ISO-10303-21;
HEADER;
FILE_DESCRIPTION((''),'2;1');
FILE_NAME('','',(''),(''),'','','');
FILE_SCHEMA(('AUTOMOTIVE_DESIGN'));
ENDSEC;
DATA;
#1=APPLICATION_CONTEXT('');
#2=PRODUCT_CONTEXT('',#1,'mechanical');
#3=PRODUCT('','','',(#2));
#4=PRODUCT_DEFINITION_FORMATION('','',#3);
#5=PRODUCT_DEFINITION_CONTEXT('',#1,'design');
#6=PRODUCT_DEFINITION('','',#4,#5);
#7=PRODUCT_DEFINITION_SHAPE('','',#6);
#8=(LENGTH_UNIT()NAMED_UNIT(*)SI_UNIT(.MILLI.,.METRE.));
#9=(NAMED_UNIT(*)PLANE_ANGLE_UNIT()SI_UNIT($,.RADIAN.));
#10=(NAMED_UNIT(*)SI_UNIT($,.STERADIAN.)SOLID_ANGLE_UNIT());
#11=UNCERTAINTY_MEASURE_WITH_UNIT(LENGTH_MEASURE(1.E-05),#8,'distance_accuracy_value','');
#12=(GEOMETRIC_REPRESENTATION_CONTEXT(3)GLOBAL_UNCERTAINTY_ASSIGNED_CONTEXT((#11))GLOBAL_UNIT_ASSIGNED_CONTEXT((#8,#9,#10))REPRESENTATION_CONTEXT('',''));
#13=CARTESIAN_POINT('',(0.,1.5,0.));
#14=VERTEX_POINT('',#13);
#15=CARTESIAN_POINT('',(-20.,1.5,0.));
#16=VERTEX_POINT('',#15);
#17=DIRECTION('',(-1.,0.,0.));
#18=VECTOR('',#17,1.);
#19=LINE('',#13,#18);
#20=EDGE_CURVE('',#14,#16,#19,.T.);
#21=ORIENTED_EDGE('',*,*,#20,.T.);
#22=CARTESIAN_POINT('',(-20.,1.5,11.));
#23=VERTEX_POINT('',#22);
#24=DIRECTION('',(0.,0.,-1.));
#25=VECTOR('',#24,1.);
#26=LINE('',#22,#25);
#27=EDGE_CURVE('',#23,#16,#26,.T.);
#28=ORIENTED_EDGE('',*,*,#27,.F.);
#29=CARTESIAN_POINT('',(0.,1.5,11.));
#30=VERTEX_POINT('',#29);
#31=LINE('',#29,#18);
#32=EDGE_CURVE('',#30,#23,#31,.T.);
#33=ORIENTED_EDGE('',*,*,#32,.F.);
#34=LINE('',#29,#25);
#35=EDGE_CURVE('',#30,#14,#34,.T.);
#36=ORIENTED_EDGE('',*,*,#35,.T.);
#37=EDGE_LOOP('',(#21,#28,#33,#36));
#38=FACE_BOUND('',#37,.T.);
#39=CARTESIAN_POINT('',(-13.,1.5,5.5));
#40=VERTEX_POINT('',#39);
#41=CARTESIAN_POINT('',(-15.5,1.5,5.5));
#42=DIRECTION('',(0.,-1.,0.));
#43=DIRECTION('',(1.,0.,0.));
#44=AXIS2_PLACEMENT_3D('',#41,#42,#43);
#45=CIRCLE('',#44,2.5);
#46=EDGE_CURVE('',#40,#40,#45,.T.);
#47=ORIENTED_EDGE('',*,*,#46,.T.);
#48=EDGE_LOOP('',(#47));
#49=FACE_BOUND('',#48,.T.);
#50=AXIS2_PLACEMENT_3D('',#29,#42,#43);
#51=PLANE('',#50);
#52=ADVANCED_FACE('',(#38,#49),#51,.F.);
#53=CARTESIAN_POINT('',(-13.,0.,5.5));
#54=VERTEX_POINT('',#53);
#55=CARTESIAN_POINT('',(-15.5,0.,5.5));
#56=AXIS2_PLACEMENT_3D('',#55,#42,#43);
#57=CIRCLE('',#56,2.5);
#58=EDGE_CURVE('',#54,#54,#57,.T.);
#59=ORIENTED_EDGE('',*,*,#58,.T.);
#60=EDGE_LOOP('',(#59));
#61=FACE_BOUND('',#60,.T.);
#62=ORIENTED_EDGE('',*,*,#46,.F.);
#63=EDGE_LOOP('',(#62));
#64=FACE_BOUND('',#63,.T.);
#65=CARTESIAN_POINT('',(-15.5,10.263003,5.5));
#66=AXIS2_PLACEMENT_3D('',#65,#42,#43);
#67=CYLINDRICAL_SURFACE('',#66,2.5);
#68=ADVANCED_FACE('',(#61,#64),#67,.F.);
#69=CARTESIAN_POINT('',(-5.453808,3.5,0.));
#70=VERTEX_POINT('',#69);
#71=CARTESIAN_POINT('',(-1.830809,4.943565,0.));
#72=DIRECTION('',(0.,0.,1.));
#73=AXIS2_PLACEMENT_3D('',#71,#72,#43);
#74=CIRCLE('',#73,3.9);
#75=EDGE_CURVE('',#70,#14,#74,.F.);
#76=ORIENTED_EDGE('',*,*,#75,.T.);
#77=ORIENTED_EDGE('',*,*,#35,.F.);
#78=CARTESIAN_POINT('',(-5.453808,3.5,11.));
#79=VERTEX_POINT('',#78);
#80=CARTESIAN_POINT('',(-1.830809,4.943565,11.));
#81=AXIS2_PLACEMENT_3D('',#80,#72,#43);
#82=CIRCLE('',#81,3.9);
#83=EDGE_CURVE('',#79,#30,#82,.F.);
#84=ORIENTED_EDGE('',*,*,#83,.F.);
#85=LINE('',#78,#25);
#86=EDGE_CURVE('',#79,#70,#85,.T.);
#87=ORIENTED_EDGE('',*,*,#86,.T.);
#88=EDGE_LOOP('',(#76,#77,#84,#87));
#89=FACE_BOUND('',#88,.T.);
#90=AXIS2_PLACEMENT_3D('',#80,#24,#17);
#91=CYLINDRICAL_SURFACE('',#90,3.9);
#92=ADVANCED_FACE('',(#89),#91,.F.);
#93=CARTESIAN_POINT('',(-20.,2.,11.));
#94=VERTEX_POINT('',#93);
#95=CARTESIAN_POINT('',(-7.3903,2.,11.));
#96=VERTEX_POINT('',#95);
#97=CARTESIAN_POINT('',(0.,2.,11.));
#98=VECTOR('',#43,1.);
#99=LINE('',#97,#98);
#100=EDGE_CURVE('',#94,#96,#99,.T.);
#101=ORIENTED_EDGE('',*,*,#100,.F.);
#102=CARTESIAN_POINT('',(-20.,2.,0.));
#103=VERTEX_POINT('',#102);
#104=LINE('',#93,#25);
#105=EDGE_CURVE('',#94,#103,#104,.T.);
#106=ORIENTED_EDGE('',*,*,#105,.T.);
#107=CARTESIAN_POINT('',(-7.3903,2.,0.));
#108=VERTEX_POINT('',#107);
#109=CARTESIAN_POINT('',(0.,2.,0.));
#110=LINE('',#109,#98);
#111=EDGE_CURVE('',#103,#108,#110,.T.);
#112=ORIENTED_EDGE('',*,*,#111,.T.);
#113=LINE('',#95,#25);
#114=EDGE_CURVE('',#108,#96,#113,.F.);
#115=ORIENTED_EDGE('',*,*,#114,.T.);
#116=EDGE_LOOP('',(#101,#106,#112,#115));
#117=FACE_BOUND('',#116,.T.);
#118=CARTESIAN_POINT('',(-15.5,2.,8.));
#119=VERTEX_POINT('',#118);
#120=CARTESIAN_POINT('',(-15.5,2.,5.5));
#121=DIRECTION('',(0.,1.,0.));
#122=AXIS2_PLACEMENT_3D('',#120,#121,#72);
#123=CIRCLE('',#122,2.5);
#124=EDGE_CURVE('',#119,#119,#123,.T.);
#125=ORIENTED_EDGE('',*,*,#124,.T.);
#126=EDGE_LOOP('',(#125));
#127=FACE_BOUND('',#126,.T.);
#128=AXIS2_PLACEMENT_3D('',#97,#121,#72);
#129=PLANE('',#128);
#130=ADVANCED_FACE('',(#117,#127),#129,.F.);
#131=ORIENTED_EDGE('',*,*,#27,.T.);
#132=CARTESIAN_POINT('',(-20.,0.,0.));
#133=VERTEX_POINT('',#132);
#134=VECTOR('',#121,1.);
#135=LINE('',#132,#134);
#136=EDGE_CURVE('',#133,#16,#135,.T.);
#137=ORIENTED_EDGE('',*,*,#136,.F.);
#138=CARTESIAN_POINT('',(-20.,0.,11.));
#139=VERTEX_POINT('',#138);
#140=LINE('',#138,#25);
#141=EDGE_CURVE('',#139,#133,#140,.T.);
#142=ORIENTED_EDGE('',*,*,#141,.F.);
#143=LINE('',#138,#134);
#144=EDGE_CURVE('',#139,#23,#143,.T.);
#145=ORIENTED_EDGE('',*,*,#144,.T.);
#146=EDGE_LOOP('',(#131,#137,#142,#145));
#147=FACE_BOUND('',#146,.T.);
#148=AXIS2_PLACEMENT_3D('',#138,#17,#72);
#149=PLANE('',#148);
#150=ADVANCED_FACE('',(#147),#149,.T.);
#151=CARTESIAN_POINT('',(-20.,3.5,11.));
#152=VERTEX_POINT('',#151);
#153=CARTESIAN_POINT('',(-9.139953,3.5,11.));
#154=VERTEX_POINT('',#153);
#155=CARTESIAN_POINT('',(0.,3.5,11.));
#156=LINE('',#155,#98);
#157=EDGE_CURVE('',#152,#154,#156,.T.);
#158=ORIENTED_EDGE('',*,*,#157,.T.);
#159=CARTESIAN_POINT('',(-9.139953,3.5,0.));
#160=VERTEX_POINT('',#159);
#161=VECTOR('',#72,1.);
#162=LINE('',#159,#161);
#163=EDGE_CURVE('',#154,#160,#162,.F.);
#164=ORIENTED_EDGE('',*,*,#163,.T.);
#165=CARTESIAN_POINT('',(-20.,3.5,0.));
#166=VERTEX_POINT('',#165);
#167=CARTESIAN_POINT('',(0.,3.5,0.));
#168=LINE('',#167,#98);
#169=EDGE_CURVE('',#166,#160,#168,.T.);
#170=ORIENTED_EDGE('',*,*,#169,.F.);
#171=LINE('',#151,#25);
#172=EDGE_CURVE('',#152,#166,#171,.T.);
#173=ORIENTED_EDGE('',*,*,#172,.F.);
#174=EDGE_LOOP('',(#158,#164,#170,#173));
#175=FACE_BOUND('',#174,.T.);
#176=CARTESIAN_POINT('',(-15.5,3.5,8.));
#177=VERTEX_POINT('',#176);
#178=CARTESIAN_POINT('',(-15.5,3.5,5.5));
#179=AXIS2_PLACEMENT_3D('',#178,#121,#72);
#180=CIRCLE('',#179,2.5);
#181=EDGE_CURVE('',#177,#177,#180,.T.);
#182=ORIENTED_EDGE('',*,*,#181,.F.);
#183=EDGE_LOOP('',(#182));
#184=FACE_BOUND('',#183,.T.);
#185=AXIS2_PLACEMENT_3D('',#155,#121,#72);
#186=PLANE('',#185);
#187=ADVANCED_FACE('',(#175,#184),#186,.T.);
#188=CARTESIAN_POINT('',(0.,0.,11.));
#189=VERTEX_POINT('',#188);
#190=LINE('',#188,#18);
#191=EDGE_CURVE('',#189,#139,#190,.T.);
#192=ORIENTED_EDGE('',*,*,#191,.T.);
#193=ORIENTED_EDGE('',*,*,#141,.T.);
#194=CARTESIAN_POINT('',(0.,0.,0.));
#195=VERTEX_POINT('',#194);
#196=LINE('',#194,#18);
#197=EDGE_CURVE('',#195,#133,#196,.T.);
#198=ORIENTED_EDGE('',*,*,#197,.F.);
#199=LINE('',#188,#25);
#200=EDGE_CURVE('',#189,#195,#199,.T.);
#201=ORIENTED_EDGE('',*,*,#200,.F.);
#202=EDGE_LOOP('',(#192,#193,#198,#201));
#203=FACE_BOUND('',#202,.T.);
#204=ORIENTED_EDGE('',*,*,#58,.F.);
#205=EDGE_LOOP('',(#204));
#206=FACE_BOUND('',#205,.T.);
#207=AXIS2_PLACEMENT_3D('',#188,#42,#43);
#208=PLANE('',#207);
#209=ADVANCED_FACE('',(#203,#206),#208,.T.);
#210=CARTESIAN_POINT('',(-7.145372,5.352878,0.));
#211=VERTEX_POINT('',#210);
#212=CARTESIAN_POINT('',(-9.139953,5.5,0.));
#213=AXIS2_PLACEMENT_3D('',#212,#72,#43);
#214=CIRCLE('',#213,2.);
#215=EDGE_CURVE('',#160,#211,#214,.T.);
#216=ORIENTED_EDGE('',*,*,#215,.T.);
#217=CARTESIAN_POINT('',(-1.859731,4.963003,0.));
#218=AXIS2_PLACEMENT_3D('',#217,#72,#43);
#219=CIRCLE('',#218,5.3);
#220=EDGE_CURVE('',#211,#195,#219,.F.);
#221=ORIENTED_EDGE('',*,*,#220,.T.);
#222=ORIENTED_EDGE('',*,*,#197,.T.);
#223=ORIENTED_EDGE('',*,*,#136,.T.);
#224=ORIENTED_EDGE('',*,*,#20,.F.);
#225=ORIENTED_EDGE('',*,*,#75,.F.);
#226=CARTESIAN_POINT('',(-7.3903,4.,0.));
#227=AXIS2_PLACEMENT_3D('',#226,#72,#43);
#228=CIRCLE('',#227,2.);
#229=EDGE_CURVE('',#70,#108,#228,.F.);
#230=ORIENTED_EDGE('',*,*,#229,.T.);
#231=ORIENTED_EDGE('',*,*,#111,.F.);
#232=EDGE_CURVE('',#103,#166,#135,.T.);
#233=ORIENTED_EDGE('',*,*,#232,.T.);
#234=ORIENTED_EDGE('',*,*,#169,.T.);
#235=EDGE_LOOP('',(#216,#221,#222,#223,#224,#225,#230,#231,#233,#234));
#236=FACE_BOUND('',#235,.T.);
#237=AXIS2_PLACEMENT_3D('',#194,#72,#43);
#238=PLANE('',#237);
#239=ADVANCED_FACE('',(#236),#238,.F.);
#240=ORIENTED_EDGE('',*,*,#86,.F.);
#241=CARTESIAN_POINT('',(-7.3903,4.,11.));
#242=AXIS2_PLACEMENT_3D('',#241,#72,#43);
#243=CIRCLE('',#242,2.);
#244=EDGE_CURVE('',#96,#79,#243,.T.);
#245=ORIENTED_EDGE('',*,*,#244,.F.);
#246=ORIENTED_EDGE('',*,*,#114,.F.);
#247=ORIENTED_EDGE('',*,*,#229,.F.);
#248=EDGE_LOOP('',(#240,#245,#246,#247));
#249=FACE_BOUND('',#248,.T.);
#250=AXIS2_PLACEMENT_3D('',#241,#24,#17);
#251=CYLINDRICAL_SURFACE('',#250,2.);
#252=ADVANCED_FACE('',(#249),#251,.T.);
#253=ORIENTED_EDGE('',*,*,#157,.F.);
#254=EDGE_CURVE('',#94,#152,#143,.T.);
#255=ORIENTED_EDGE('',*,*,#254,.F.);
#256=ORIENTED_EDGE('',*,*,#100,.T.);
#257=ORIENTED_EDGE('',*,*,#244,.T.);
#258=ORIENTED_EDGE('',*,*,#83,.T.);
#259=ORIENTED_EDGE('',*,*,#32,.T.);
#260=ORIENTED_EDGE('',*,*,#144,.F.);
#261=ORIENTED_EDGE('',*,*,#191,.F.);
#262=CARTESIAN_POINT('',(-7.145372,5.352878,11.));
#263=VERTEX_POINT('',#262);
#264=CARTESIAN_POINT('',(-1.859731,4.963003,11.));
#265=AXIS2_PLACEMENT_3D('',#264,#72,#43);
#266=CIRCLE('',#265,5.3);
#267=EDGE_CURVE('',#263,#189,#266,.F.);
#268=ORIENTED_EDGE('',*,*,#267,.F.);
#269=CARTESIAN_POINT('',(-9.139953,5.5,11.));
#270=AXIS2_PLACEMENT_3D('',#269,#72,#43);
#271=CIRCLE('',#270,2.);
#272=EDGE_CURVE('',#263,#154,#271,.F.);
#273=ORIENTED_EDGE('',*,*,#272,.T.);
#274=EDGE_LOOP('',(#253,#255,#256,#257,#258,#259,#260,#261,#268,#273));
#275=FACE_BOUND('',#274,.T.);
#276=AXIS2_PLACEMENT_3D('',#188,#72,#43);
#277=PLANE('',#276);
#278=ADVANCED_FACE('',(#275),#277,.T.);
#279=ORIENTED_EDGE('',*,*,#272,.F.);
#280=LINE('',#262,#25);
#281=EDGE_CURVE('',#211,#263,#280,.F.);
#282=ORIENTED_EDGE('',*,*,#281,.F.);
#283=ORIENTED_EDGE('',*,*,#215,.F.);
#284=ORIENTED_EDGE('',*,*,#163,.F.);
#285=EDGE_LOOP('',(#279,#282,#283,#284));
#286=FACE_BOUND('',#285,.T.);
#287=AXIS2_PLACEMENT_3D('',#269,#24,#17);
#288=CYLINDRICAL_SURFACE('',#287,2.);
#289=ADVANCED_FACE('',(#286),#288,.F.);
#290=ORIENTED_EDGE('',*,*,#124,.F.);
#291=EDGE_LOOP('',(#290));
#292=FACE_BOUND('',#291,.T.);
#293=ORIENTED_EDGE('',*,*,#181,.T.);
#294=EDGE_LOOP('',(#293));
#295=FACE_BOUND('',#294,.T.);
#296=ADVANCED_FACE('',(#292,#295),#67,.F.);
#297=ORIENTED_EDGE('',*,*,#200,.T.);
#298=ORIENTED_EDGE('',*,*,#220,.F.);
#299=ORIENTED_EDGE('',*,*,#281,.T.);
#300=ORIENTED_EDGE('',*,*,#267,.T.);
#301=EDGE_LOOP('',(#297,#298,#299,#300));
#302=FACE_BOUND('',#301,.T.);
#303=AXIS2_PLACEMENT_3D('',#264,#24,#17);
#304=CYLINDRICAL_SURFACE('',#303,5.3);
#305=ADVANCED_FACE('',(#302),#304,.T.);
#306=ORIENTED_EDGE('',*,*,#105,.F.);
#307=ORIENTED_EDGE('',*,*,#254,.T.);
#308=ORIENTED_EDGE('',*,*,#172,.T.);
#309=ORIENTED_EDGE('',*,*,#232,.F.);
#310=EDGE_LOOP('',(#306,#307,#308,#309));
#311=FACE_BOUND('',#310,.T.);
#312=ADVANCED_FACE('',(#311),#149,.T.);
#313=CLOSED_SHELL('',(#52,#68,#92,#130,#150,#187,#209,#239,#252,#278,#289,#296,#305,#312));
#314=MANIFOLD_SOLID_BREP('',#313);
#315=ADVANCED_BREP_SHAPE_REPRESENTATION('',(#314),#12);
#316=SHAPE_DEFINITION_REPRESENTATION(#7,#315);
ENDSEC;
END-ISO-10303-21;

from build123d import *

# Parameters (mm, degrees)
SKETCH1_W           = 14.546192004
SKETCH1_H           = 1.5
SKETCH1_W_2         = 20
BOSS_EXTRUDE1_DEPTH = 11
SKETCH2_R           = 2.5
CUT_EXTRUDE1_DEPTH  = 26.026570584
FILLET1_R           = 2
FILLET2_R           = 2


with BuildPart() as part:
    # Sketch1 → Boss-Extrude1 (new body)
    with BuildSketch(Plane.XY):
        with Locations((-12.726903998, 2.75)):
            Rectangle(SKETCH1_W, SKETCH1_H)
        with BuildLine():
            Line((0, 1.5), (0, 0))
            ThreePointArc((0, 0), (0.523071842, 9.697161138), (-6.953807996, 3.5))
            Line((-6.953807996, 3.5), (-5.453807996, 3.5))
            ThreePointArc((-5.453807996, 3.5), (-0.488055957, 8.605123673), (0, 1.5))
        make_face()
        with Locations((-10, 0.75)):
            Rectangle(SKETCH1_W_2, SKETCH1_H)
    extrude(amount=BOSS_EXTRUDE1_DEPTH)

    # Sketch2 → Cut-Extrude1 (cut, through all)
    with BuildSketch(Plane(origin=(0, 0, 0), x_dir=(-1, 0, 0), z_dir=(0, -1, 0))):
        with Locations(Location((15.5, -5.5, 0), (0, 0, 270))):
            Circle(SKETCH2_R)
    extrude(amount=-CUT_EXTRUDE1_DEPTH, mode=Mode.SUBTRACT)

    # Fillet1
    fillet1_edges = [part.edges().sort_by_distance(p)[0] for p in [
        (-6.953807996, 3.5, 5.5),
    ]]
    fillet(fillet1_edges, radius=FILLET1_R)

    # Fillet2
    # the kernel refuses this fillet: 2 mm, written as the material it takes off along each edge
    with BuildSketch(Plane(origin=(-5.453807996, 2, -4.841229183), x_dir=(-1, 0, 0), z_dir=(0, 0, 1))) as fillet2_piece_1:
        with BuildLine():
            CenterArc((1.936491673, -2), FILLET2_R, 90, 75.522487814)
            Line((0, -1.5), (-0.038729833, -1.49))
            ThreePointArc((-0.038729833, -1.49), (-0.04, -0.75), (-0.04, 0))
            Line((-0.04, 0), (0, 0.04))
            Line((0, 0.04), (1.936491673, 0.04))
            Line((1.936491673, 0.04), (1.936491673, 0))
        make_face()
    extrude(amount=20.682458366, mode=Mode.SUBTRACT)


solid = part.part
